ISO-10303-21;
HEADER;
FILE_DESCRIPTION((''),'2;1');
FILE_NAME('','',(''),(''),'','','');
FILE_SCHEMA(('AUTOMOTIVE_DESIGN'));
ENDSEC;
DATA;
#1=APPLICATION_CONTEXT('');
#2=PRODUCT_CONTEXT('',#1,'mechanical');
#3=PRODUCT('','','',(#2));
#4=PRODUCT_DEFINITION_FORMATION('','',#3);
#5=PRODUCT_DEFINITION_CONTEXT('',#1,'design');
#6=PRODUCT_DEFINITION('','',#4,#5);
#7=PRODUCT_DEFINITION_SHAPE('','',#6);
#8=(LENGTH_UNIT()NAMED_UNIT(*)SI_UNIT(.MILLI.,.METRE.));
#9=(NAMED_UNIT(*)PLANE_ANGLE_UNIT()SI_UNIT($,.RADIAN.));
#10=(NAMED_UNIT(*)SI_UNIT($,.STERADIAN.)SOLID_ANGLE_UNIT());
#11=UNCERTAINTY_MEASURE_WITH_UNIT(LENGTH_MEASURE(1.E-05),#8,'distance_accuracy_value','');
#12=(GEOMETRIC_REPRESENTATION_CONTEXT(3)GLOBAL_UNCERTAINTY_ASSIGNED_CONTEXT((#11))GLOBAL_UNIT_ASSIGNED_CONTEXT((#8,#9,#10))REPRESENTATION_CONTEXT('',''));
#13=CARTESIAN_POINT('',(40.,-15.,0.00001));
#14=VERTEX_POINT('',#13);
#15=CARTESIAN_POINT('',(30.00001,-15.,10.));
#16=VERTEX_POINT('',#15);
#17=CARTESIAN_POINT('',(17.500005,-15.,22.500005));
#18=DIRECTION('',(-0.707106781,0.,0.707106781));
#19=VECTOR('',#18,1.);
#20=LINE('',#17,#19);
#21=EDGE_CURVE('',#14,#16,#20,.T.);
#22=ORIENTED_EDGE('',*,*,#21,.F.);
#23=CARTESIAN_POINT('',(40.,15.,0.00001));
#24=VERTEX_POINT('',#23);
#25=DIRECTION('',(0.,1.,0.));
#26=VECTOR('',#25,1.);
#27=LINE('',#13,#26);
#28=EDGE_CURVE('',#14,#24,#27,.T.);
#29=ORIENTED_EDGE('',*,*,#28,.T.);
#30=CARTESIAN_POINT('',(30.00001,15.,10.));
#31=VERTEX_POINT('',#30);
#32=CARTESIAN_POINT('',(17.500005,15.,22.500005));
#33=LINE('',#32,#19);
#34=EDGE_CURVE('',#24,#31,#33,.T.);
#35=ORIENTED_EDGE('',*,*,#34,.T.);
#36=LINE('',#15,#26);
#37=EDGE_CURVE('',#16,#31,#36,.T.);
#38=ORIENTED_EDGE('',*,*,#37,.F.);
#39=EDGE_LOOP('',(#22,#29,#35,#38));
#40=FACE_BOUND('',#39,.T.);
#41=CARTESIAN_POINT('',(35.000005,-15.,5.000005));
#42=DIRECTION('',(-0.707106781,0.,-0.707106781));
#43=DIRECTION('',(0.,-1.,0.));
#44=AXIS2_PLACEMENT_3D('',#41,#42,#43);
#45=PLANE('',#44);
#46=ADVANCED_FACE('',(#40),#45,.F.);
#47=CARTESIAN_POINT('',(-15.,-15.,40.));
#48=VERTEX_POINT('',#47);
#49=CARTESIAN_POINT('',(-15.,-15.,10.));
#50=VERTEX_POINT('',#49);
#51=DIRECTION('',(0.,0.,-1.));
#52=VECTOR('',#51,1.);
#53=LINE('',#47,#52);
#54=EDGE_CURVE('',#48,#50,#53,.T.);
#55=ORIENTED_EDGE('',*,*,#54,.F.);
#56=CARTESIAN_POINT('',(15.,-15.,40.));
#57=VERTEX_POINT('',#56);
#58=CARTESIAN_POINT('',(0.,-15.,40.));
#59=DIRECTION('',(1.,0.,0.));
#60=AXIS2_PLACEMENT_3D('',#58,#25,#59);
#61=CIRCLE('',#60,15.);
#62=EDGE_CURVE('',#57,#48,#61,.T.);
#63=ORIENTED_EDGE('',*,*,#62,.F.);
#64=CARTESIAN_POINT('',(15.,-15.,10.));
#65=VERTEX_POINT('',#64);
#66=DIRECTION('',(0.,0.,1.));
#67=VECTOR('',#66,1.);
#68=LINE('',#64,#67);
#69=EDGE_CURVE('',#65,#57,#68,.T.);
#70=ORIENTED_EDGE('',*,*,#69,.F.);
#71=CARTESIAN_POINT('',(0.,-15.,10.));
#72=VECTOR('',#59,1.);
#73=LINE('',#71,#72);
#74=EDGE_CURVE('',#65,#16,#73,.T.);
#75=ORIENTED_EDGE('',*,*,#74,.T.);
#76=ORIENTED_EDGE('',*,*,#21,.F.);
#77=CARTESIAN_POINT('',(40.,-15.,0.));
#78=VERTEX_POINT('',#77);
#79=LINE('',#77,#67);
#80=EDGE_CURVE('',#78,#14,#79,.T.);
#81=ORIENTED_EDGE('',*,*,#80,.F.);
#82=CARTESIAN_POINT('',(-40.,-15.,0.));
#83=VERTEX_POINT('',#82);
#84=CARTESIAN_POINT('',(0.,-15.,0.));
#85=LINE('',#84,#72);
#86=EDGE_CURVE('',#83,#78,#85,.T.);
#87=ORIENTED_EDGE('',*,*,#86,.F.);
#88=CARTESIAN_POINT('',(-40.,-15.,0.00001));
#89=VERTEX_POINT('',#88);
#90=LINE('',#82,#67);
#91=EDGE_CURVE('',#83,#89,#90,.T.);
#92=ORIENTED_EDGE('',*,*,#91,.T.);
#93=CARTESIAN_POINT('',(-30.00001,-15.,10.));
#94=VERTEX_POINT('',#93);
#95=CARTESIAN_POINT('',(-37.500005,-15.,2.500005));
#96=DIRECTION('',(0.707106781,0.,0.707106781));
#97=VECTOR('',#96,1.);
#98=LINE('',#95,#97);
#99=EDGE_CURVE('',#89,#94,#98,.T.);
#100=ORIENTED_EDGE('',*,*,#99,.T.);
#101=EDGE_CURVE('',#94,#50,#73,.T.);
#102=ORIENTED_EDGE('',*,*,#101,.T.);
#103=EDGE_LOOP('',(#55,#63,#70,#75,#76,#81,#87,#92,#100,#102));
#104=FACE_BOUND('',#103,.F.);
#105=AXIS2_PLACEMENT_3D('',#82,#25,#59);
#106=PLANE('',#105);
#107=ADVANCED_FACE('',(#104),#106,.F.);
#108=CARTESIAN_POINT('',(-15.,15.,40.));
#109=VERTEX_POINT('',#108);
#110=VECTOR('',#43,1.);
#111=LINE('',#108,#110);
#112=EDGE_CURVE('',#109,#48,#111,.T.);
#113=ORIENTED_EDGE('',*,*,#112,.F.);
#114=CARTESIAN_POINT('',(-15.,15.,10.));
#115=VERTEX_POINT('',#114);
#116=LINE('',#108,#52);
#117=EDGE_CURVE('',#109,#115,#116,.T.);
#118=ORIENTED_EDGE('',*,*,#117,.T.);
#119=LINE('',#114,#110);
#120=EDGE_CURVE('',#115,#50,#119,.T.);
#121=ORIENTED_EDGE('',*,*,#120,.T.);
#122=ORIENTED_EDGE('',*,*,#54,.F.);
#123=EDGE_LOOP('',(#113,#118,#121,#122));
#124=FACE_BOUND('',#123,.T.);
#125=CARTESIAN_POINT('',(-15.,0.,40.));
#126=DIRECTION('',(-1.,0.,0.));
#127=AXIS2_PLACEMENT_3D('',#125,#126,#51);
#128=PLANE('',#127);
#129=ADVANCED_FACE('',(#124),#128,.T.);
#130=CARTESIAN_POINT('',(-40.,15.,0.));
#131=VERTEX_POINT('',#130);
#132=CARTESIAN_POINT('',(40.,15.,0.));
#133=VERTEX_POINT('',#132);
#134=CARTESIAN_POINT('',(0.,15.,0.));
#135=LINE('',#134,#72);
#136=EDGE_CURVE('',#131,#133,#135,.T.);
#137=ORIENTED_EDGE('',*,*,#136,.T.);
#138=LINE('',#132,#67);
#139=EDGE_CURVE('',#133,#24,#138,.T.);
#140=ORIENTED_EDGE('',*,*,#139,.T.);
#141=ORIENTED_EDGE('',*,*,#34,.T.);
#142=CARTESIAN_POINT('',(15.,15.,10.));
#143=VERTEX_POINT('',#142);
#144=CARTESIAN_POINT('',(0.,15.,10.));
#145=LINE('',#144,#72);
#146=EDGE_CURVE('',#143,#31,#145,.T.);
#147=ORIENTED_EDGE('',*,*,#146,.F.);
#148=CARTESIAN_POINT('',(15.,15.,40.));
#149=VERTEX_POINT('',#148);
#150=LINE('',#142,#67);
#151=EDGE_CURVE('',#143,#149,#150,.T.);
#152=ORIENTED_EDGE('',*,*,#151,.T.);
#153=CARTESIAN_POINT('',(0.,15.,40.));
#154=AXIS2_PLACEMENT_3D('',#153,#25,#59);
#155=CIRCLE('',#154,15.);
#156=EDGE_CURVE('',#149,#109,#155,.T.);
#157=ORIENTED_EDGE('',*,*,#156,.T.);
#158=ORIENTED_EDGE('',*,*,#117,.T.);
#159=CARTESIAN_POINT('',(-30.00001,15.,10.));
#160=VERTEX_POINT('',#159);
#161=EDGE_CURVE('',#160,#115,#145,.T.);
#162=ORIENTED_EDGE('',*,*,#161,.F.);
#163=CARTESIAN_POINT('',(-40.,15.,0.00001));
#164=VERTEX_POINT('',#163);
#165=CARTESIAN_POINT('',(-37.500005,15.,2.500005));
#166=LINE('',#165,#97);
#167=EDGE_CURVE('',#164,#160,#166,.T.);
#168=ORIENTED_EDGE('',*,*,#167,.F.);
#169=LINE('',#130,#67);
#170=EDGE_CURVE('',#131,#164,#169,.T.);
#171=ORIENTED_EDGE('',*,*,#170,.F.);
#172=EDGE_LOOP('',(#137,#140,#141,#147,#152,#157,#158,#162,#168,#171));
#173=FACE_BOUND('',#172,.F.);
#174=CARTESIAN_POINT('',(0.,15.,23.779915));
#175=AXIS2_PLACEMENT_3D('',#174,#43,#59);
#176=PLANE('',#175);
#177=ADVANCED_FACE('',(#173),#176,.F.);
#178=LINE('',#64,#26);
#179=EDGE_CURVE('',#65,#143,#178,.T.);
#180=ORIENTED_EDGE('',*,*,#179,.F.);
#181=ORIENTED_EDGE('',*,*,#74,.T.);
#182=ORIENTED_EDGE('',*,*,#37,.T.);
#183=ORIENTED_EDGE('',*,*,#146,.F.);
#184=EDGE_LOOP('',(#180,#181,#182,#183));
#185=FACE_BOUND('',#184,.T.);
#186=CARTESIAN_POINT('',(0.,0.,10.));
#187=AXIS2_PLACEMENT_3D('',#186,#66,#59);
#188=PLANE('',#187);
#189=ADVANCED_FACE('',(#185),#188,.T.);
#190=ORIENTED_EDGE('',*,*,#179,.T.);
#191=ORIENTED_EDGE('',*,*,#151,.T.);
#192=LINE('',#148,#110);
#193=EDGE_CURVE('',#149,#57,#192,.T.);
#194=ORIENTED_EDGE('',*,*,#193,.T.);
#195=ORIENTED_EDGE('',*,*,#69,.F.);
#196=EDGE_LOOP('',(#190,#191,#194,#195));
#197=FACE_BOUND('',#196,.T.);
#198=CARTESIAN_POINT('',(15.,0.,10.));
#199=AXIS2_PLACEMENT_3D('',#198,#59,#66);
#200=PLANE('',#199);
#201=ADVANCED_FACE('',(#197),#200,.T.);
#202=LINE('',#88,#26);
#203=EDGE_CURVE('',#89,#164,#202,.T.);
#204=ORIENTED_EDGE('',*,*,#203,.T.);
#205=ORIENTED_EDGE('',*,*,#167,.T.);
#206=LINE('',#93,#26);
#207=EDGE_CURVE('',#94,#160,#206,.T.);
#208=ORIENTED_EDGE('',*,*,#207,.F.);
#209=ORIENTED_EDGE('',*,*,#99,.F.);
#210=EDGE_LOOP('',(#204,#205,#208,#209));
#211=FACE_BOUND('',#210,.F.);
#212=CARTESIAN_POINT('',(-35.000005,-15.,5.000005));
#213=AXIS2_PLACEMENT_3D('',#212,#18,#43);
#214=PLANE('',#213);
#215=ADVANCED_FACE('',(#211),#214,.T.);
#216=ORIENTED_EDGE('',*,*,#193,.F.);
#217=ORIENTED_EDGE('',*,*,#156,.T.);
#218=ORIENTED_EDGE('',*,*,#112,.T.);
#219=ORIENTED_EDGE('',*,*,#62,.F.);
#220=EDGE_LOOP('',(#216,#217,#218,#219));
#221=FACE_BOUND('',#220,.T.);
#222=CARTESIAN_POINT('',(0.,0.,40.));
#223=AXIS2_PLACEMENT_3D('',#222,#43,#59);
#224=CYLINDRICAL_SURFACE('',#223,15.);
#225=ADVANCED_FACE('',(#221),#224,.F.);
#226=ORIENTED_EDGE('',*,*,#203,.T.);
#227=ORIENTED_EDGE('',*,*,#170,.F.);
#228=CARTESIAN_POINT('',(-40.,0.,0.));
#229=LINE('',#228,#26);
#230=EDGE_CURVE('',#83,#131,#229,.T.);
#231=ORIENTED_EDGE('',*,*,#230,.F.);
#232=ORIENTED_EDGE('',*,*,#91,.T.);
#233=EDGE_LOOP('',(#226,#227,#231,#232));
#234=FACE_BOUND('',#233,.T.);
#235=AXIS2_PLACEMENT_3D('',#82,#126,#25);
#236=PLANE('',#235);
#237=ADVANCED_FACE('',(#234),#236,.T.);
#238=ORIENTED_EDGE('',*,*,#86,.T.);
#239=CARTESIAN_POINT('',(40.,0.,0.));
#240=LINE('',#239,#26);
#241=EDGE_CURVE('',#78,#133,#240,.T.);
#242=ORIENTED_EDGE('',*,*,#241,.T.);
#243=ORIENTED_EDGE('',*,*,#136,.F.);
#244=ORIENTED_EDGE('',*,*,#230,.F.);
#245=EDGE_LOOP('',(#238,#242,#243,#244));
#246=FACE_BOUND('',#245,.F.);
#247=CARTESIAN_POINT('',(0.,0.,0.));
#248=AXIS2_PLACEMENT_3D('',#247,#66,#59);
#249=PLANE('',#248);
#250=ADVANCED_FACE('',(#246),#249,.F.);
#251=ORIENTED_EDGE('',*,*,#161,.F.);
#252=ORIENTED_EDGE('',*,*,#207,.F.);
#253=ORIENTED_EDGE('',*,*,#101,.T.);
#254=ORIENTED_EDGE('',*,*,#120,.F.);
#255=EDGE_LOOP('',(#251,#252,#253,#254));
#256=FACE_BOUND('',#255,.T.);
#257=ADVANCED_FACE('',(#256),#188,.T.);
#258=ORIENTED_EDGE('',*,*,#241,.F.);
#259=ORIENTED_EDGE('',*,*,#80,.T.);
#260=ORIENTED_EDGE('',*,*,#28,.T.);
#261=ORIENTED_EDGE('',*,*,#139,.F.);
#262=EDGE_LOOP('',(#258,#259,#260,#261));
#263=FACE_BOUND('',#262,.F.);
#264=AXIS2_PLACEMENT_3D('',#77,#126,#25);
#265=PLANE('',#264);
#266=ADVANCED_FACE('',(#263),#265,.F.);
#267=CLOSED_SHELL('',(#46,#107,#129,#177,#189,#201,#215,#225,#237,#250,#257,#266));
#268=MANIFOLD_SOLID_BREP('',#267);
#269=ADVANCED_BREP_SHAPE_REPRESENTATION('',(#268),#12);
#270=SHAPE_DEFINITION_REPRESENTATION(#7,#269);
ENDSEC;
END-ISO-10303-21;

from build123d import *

# Parameters (mm, degrees)
F0_W     = 80
F0_H     = 30
F1_DEPTH = 10
F2_SIZE  = 9.99999
F4_DEPTH = 15
F5_DEPTH = 15


# Not quite as in the source:
# - a fillet or chamfer is up to 0.001 mm smaller than in the source, because OpenCascade refuses the exact size


with BuildPart() as f1:
    # F0 (on Top) → F1 (new body)
    with BuildSketch(Plane.XY):
        Rectangle(F0_W, F0_H)
    extrude(amount=F1_DEPTH)

    # F2 (size 10 in the source; OpenCascade refuses exactly that, so slightly less here)
    f2_edges = [f1.edges().sort_by_distance(p)[0] for p in [
        (-40, 0, 10),
        (40, 0, 10),
    ]]
    chamfer(f2_edges, length=F2_SIZE)

    # F3 (on Front) → F4 (join)
    with BuildSketch(Plane.XZ):
        with BuildLine():
            Line((-15, 10), (15, 10))
            Line((15, 10), (15, 40))
            ThreePointArc((15, 40), (0, 25), (-15, 40))
            Line((-15, 40), (-15, 10))
        make_face()
    extrude(amount=F4_DEPTH)

    # F5 (add): a face of the model
    f5_faces = [f1.faces().sort_by_distance(p)[0] for p in [
        (0, 0, 19.4171231702),
    ]]
    extrude(f5_faces, amount=F5_DEPTH)


solid = f1.part
